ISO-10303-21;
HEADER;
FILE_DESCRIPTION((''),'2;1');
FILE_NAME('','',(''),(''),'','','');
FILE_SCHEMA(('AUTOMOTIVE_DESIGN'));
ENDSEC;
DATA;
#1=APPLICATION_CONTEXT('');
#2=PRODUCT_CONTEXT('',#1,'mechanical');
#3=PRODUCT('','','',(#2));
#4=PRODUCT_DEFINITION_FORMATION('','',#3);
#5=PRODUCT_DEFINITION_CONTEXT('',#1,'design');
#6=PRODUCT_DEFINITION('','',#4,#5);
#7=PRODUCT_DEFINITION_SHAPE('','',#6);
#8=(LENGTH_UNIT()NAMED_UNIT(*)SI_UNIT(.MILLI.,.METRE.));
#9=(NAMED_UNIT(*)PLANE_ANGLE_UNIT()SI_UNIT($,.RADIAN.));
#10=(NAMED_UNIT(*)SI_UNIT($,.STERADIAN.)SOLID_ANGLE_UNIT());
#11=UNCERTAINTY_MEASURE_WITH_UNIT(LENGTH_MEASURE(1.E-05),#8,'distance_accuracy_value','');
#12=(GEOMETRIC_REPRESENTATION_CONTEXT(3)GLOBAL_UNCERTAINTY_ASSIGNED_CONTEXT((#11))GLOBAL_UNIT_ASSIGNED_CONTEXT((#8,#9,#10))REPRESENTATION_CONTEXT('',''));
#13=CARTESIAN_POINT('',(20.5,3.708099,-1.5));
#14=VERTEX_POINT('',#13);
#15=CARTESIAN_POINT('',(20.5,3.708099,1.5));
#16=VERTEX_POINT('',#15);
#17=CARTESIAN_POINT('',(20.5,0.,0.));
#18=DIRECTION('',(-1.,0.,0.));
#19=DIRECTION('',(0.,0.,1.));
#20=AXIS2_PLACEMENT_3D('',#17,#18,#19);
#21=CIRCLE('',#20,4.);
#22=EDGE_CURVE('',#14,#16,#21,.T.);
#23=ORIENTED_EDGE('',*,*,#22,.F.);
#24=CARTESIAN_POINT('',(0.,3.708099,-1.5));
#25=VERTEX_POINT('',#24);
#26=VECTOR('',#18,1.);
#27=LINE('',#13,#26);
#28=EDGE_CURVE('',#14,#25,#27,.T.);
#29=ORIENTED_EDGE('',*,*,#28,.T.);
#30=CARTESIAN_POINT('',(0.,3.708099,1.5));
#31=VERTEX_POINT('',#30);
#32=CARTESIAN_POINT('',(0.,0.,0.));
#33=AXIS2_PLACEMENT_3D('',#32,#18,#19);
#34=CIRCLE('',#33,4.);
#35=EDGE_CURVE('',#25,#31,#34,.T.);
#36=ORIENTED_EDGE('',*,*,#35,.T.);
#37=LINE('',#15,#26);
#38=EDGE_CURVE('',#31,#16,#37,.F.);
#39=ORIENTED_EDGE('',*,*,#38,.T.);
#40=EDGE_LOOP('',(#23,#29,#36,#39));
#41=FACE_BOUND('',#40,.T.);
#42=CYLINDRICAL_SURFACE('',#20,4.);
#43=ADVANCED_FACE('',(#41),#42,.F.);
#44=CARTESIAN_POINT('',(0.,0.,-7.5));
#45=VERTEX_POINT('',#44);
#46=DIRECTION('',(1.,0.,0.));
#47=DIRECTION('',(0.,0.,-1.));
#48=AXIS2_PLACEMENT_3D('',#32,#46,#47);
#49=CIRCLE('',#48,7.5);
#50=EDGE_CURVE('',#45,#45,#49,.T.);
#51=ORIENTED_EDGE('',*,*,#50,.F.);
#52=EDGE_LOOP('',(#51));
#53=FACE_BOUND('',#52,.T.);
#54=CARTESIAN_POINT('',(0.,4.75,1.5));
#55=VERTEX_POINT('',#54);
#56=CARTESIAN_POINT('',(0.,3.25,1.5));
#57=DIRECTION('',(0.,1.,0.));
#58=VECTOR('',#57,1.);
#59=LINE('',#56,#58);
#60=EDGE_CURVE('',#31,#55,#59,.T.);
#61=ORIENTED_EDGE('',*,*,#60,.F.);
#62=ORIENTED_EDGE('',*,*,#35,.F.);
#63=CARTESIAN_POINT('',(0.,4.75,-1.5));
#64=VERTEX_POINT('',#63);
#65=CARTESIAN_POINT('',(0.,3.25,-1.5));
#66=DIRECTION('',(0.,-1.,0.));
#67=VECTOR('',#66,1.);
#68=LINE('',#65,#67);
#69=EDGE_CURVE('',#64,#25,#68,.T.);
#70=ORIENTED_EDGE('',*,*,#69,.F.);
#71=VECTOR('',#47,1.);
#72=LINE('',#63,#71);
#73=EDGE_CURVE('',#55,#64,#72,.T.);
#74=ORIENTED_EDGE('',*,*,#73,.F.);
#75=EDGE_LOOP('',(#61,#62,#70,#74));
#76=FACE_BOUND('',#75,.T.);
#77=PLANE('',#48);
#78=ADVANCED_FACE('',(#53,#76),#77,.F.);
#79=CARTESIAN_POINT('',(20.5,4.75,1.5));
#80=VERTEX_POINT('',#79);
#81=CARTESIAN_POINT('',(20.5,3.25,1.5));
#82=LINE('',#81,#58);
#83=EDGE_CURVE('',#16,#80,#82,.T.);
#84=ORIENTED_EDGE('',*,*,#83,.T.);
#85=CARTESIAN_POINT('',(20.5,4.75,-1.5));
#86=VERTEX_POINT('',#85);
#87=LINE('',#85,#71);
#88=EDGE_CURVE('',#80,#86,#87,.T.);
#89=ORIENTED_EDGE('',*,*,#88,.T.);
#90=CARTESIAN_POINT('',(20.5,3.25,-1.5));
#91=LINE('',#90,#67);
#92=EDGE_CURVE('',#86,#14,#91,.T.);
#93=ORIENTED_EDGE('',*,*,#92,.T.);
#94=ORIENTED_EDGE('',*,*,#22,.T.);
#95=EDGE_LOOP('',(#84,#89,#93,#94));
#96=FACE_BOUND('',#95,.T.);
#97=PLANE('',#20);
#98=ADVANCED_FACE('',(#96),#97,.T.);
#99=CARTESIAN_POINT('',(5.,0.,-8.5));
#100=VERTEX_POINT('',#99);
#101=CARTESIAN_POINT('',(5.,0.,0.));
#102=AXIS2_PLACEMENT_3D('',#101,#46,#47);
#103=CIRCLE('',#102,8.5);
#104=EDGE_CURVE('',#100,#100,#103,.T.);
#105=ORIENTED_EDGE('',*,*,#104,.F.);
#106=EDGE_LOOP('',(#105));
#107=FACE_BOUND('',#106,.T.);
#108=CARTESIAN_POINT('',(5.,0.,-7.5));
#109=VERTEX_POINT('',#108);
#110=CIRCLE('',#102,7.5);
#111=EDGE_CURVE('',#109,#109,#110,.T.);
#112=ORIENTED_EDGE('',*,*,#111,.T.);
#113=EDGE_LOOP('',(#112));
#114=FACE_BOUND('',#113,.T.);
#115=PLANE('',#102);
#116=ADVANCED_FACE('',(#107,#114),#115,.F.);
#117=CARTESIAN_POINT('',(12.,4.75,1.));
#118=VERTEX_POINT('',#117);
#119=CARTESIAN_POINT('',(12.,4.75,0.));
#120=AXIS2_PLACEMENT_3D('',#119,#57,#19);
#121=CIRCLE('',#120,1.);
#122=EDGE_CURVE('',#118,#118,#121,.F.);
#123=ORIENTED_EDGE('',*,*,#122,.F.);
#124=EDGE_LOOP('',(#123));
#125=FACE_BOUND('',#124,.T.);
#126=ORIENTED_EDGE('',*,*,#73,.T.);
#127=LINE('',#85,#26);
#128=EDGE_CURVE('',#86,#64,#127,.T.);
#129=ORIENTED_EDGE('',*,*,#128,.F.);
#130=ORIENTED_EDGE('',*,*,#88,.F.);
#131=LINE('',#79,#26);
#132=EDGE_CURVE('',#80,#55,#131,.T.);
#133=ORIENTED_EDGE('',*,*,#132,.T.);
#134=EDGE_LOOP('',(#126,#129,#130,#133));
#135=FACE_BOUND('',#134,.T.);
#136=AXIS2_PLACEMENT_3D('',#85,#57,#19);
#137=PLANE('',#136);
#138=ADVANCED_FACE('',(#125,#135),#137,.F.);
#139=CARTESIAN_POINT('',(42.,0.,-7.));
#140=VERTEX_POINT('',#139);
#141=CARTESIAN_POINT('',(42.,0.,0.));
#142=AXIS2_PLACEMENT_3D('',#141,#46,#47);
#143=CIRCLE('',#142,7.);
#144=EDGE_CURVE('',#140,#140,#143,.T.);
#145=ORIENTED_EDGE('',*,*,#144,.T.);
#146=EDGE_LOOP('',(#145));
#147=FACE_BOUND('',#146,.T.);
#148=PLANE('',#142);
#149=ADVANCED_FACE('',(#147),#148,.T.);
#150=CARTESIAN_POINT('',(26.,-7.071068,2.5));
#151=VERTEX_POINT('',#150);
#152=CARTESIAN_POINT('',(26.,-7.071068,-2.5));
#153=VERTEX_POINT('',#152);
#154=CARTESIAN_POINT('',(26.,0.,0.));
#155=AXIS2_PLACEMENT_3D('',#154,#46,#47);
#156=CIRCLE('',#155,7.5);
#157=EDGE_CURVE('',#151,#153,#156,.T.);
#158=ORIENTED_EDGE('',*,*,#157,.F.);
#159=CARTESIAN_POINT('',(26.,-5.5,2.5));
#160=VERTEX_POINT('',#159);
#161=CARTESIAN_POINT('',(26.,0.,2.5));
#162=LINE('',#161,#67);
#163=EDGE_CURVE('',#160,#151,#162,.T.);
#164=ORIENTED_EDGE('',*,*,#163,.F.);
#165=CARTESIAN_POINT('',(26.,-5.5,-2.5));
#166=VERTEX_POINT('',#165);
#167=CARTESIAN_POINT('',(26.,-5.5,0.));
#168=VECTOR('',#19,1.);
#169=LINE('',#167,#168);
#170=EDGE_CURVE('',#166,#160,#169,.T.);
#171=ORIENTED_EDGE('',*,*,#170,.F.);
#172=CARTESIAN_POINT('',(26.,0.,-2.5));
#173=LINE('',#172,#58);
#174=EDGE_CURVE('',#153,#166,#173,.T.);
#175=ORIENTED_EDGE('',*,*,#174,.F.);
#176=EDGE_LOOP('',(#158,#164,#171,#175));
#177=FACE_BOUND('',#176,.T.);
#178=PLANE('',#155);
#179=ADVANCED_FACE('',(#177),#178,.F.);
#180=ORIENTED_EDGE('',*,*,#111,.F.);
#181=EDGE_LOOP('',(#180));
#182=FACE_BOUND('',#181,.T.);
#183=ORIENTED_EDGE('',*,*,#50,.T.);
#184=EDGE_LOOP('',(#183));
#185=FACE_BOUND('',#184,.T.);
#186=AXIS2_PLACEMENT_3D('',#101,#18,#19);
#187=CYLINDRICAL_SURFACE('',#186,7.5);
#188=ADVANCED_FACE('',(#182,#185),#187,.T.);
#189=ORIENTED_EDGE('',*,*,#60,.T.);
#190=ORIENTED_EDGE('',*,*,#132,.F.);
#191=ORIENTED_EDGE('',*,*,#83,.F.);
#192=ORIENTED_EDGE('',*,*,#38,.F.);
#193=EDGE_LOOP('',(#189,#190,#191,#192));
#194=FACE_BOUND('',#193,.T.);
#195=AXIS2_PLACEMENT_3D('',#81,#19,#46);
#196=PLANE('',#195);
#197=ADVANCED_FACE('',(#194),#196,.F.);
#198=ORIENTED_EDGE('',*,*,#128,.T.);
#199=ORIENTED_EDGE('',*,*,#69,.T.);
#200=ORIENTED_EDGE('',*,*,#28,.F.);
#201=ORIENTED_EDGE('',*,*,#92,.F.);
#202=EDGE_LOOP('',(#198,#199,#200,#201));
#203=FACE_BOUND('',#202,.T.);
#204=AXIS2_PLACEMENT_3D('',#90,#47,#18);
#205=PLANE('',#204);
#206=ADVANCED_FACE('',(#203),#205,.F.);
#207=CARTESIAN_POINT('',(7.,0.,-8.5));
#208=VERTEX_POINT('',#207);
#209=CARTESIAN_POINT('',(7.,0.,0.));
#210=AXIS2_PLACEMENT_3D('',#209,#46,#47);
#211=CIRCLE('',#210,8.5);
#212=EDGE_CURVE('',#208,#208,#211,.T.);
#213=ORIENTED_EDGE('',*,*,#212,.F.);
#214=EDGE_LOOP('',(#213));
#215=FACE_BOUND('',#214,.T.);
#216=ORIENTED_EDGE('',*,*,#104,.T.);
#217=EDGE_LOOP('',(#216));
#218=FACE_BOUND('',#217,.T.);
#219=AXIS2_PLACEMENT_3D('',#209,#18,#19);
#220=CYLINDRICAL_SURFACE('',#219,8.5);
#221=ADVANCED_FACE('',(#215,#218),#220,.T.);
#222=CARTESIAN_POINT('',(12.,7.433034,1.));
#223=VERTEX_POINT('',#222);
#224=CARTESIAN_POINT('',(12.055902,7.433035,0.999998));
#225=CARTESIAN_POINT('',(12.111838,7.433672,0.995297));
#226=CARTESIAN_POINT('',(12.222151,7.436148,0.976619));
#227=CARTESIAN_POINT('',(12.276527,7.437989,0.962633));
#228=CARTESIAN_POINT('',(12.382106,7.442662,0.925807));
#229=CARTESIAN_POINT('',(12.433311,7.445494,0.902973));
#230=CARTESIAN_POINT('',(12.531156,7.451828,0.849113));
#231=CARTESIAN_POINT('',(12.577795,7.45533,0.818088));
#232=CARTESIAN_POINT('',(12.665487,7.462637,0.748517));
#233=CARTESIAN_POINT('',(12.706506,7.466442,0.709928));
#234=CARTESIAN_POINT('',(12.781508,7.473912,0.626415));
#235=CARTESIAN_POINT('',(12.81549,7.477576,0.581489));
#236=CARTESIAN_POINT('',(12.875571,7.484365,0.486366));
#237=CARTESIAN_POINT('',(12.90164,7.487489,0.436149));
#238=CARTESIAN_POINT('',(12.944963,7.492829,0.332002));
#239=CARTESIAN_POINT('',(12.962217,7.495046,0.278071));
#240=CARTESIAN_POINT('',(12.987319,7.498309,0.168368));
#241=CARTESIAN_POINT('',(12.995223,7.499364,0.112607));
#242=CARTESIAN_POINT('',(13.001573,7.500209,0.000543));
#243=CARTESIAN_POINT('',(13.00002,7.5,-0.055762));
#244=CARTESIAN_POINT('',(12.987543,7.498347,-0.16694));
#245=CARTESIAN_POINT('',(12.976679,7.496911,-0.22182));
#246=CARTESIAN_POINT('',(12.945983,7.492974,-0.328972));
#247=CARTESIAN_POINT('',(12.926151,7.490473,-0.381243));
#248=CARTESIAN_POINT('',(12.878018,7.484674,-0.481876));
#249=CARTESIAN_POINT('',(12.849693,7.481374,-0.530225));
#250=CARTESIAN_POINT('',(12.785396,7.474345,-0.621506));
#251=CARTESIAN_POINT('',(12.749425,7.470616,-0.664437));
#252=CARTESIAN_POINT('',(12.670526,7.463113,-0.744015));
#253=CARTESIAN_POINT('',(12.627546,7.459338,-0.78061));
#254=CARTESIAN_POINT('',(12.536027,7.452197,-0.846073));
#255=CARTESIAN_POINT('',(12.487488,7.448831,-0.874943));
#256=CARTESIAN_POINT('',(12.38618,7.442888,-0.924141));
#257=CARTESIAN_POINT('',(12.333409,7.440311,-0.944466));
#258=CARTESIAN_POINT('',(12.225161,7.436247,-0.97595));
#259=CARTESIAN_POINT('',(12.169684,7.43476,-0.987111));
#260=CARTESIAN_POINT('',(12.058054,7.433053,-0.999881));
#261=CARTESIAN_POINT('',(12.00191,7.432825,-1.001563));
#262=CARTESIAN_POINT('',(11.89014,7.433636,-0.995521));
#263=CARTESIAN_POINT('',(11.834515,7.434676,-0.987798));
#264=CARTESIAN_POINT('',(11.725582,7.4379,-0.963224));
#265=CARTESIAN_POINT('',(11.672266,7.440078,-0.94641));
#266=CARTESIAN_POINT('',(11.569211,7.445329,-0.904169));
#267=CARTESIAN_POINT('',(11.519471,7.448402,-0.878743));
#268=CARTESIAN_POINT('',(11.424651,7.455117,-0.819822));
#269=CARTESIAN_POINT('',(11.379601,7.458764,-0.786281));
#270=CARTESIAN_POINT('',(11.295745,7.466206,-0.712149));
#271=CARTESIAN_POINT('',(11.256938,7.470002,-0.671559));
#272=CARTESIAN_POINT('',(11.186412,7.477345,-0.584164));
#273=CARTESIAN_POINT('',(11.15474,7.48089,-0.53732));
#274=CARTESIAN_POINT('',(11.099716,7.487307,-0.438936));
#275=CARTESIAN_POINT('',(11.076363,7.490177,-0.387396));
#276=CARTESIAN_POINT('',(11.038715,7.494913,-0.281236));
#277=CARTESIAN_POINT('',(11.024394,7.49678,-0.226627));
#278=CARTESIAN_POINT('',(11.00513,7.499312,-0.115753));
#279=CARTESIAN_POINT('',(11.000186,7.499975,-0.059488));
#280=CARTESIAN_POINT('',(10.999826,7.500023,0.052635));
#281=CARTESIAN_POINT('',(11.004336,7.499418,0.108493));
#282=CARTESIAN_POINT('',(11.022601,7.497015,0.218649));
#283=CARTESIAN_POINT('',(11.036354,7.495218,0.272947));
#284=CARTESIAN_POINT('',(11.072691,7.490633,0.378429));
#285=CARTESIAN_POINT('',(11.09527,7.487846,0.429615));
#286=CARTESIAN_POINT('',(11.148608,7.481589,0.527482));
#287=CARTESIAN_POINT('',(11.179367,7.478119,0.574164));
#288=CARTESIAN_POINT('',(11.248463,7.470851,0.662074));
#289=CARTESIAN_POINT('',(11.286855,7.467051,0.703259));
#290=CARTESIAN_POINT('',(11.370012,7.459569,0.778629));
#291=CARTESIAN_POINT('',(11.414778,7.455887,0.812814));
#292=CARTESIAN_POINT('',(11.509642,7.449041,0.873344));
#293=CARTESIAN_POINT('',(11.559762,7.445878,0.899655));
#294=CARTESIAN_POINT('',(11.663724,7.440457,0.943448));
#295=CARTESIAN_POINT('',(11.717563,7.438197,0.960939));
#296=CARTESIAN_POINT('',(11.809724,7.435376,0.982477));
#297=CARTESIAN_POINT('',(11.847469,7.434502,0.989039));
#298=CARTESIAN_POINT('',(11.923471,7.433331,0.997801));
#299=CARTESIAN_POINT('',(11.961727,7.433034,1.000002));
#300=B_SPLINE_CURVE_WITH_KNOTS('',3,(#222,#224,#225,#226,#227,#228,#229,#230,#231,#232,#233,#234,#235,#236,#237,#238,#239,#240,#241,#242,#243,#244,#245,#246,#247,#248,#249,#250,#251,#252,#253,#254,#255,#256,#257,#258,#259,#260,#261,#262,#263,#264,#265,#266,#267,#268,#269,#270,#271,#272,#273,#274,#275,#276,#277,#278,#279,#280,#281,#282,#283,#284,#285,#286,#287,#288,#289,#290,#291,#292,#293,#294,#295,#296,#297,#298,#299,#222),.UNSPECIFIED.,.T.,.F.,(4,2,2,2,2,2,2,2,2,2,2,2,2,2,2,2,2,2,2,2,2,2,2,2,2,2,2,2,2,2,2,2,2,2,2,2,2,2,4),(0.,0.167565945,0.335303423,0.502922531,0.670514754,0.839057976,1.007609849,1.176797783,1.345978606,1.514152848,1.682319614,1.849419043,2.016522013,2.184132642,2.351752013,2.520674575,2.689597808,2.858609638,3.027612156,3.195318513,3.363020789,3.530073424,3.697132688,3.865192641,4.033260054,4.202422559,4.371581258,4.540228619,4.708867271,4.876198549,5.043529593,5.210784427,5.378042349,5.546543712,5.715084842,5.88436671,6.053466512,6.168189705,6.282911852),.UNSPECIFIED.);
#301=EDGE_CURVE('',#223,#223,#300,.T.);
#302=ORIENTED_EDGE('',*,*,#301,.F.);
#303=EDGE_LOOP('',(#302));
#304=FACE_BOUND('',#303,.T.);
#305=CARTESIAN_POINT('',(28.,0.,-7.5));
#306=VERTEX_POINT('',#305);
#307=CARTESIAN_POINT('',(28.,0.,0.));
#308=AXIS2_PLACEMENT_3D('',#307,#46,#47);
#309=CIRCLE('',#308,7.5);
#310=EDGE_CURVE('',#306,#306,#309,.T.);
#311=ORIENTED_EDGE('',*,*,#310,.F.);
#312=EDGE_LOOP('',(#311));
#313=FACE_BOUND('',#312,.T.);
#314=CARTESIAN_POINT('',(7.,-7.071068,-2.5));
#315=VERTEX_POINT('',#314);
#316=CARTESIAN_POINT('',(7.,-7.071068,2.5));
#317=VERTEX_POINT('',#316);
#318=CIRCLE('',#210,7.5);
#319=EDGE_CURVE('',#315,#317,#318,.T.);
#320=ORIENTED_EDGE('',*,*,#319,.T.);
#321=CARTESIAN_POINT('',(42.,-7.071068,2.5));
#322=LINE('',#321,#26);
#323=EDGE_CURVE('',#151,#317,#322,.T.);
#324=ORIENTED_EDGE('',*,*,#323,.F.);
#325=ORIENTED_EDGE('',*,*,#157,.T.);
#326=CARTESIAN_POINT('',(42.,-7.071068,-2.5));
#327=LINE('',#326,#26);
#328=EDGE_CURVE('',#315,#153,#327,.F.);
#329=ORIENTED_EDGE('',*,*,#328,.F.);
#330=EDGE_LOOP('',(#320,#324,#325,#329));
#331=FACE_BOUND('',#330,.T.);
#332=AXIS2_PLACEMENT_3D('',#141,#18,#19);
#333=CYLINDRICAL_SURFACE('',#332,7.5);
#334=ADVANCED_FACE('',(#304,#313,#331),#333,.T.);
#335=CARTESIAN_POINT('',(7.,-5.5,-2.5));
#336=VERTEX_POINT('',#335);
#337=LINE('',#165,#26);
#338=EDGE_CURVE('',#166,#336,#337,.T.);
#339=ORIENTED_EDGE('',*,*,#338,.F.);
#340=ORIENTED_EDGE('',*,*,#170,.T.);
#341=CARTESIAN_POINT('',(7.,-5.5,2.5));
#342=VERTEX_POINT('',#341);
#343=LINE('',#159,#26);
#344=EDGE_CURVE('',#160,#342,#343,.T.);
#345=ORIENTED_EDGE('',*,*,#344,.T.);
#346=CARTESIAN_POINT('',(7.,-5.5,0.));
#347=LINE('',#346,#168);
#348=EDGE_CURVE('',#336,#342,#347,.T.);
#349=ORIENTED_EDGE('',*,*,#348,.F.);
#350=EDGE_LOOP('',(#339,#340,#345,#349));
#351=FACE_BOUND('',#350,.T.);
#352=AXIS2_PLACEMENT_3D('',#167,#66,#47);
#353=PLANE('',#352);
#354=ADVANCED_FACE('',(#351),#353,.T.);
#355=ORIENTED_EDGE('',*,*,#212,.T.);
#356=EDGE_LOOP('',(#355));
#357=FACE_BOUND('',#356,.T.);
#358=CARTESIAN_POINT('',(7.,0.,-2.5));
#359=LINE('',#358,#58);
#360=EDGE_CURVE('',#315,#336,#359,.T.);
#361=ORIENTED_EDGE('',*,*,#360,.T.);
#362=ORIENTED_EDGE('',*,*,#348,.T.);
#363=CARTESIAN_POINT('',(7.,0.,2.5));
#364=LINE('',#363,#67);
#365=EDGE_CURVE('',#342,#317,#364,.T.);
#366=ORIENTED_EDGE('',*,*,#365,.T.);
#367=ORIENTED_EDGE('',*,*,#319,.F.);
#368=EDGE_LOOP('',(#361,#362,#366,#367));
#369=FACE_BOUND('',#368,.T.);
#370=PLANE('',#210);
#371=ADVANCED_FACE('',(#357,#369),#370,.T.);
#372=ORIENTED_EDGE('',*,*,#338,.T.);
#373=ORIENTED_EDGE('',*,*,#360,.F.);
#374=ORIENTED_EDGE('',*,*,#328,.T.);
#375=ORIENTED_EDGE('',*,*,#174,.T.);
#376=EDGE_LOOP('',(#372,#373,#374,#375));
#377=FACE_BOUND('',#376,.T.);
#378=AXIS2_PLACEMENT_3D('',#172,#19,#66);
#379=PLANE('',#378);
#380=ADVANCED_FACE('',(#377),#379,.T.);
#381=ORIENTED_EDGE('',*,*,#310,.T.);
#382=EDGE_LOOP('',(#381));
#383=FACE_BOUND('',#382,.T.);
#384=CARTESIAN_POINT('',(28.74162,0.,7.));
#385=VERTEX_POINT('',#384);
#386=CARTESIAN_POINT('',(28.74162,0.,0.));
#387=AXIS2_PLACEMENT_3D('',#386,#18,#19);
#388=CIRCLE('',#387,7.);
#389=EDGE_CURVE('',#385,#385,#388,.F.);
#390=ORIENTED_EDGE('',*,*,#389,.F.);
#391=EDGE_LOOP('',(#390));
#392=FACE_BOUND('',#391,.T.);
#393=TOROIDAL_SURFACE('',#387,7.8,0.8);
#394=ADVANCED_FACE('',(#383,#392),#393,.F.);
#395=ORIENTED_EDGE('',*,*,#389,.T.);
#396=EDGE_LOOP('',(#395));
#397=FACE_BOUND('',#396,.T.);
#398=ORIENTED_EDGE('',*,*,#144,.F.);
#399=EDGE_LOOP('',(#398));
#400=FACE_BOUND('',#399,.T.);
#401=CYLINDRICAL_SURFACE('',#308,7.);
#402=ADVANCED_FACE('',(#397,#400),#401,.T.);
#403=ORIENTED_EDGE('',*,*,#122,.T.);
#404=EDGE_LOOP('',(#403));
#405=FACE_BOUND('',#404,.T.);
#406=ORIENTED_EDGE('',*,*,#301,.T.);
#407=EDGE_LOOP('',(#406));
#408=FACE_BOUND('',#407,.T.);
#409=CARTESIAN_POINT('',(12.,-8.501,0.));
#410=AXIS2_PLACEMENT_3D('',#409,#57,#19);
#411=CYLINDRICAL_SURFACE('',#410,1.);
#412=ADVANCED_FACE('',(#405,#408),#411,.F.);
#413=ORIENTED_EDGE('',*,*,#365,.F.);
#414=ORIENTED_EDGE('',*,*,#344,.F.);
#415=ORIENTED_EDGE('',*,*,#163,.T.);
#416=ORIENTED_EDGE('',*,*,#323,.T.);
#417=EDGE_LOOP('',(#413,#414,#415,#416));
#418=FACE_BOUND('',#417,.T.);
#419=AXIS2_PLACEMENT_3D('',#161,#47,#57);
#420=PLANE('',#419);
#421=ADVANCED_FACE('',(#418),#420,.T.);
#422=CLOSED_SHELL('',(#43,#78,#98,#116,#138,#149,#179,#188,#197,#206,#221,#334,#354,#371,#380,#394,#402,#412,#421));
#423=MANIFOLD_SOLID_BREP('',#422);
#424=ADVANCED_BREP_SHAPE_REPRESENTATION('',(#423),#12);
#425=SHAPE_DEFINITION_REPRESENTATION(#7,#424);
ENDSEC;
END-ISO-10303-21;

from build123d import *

# Parameters (mm, degrees)
SKETCH1_R           = 7.5
BOSS_EXTRUDE1_DEPTH = 5
SKETCH2_R           = 8.5
BOSS_EXTRUDE2_DEPTH = 2
SKETCH3_R           = 7.5
BOSS_EXTRUDE3_DEPTH = 35
SKETCH4_R           = 4
CUT_EXTRUDE1_DEPTH  = 20.5
SKETCH6_W           = 3
SKETCH6_H           = 1.5
CUT_EXTRUDE2_DEPTH  = 20.5
CUT_EXTRUDE3_REACH  = 47.741
SKETCH7_R           = 1
CUT_EXTRUDE5_START  = -35
SKETCH8_W           = 5
SKETCH8_H           = 4
CUT_EXTRUDE5_DEPTH  = 19
CUT_EXTRUDE6_START  = -14
SKETCH9_R           = 7.5
SKETCH9_R_2         = 7
CUT_EXTRUDE6_DEPTH  = 14
FILLET1_R           = 0.8


with BuildPart() as part:
    # Sketch1 → Boss-Extrude1 (new body)
    with BuildSketch(Plane(origin=(0, 0, 0), x_dir=(0, 0, -1), z_dir=(1, 0, 0))):
        Circle(SKETCH1_R)
    extrude(amount=BOSS_EXTRUDE1_DEPTH)

    # Sketch2 → Boss-Extrude2 (add)
    with BuildSketch(Plane(origin=(5, 0, 0), x_dir=(0, 0, -1), z_dir=(1, 0, 0))):
        Circle(SKETCH2_R)
    extrude(amount=BOSS_EXTRUDE2_DEPTH)

    # Sketch3 → Boss-Extrude3 (add)
    with BuildSketch(Plane(origin=(7, 0, 0), x_dir=(0, 0, -1), z_dir=(1, 0, 0))):
        Circle(SKETCH3_R)
    extrude(amount=BOSS_EXTRUDE3_DEPTH)

    # Sketch4 → Cut-Extrude1 (cut)
    with BuildSketch(Plane.ZY):
        Circle(SKETCH4_R)
    extrude(amount=-CUT_EXTRUDE1_DEPTH, mode=Mode.SUBTRACT)

    # Sketch6 → Cut-Extrude2 (cut)
    with BuildSketch(Plane.ZY):
        with Locations((0, 4)):
            Rectangle(SKETCH6_W, SKETCH6_H)
    extrude(amount=-CUT_EXTRUDE2_DEPTH, mode=Mode.SUBTRACT)

    # Sketch7 → Cut-Extrude3 (cut, up to next)
    with BuildSketch(Plane(origin=(0, 7.5, 0), x_dir=(1, 0, 0), z_dir=(0, 1, 0)), mode=Mode.PRIVATE) as cut_extrude3_sk1:
        with Locations(Location((12, 0, 0), (0, 0, 270))):
            Circle(SKETCH7_R)
    cut_extrude3_tool1 = extrude(cut_extrude3_sk1.sketch, amount=-CUT_EXTRUDE3_REACH, mode=Mode.PRIVATE) & part.part
    add(cut_extrude3_tool1.solids().sort_by_distance((12, 7.5, 0))[0], mode=Mode.SUBTRACT)

    # Sketch8 → Cut-Extrude5 (cut)
    with BuildSketch(Plane(origin=(42, 0, 0), x_dir=(0, 0, -1), z_dir=(1, 0, 0)).offset(CUT_EXTRUDE5_START)):
        with Locations((0, -7.5)):
            Rectangle(SKETCH8_W, SKETCH8_H)
    extrude(amount=CUT_EXTRUDE5_DEPTH, mode=Mode.SUBTRACT)

    # Sketch9 → Cut-Extrude6 (cut)
    with BuildSketch(Plane(origin=(42, 0, 0), x_dir=(0, 0, -1), z_dir=(1, 0, 0)).offset(CUT_EXTRUDE6_START)):
        with Locations(Location((0, 0, 0), (0, 0, 250.528779366))):
            Circle(SKETCH9_R)
        Circle(SKETCH9_R_2, mode=Mode.SUBTRACT)
    extrude(amount=CUT_EXTRUDE6_DEPTH, mode=Mode.SUBTRACT)

    # Fillet1
    # the kernel refuses this fillet: 0.8 mm, written as the material it adds along each edge
    with BuildSketch(Plane(origin=(28, 0, 0), x_dir=(0, 0, -1), z_dir=(0, -1, 0))) as fillet1_piece_1:
        with BuildLine():
            CenterArc((7.8, 0.741619849), FILLET1_R, 180, 67.975687163)
            Line((7, 0.741619849), (6.984, 0.741619849))
            Line((6.984, 0.741619849), (6.984, 0))
            Line((6.984, 0), (7, -0.016))
            ThreePointArc((7, -0.016), (7.25, -0.016), (7.494, -0.014832397))
            Line((7.494, -0.014832397), (7.5, 0))
        make_face()
    revolve(axis=Axis((28, 0, 0), (1, 0, 0)))


solid = part.part
